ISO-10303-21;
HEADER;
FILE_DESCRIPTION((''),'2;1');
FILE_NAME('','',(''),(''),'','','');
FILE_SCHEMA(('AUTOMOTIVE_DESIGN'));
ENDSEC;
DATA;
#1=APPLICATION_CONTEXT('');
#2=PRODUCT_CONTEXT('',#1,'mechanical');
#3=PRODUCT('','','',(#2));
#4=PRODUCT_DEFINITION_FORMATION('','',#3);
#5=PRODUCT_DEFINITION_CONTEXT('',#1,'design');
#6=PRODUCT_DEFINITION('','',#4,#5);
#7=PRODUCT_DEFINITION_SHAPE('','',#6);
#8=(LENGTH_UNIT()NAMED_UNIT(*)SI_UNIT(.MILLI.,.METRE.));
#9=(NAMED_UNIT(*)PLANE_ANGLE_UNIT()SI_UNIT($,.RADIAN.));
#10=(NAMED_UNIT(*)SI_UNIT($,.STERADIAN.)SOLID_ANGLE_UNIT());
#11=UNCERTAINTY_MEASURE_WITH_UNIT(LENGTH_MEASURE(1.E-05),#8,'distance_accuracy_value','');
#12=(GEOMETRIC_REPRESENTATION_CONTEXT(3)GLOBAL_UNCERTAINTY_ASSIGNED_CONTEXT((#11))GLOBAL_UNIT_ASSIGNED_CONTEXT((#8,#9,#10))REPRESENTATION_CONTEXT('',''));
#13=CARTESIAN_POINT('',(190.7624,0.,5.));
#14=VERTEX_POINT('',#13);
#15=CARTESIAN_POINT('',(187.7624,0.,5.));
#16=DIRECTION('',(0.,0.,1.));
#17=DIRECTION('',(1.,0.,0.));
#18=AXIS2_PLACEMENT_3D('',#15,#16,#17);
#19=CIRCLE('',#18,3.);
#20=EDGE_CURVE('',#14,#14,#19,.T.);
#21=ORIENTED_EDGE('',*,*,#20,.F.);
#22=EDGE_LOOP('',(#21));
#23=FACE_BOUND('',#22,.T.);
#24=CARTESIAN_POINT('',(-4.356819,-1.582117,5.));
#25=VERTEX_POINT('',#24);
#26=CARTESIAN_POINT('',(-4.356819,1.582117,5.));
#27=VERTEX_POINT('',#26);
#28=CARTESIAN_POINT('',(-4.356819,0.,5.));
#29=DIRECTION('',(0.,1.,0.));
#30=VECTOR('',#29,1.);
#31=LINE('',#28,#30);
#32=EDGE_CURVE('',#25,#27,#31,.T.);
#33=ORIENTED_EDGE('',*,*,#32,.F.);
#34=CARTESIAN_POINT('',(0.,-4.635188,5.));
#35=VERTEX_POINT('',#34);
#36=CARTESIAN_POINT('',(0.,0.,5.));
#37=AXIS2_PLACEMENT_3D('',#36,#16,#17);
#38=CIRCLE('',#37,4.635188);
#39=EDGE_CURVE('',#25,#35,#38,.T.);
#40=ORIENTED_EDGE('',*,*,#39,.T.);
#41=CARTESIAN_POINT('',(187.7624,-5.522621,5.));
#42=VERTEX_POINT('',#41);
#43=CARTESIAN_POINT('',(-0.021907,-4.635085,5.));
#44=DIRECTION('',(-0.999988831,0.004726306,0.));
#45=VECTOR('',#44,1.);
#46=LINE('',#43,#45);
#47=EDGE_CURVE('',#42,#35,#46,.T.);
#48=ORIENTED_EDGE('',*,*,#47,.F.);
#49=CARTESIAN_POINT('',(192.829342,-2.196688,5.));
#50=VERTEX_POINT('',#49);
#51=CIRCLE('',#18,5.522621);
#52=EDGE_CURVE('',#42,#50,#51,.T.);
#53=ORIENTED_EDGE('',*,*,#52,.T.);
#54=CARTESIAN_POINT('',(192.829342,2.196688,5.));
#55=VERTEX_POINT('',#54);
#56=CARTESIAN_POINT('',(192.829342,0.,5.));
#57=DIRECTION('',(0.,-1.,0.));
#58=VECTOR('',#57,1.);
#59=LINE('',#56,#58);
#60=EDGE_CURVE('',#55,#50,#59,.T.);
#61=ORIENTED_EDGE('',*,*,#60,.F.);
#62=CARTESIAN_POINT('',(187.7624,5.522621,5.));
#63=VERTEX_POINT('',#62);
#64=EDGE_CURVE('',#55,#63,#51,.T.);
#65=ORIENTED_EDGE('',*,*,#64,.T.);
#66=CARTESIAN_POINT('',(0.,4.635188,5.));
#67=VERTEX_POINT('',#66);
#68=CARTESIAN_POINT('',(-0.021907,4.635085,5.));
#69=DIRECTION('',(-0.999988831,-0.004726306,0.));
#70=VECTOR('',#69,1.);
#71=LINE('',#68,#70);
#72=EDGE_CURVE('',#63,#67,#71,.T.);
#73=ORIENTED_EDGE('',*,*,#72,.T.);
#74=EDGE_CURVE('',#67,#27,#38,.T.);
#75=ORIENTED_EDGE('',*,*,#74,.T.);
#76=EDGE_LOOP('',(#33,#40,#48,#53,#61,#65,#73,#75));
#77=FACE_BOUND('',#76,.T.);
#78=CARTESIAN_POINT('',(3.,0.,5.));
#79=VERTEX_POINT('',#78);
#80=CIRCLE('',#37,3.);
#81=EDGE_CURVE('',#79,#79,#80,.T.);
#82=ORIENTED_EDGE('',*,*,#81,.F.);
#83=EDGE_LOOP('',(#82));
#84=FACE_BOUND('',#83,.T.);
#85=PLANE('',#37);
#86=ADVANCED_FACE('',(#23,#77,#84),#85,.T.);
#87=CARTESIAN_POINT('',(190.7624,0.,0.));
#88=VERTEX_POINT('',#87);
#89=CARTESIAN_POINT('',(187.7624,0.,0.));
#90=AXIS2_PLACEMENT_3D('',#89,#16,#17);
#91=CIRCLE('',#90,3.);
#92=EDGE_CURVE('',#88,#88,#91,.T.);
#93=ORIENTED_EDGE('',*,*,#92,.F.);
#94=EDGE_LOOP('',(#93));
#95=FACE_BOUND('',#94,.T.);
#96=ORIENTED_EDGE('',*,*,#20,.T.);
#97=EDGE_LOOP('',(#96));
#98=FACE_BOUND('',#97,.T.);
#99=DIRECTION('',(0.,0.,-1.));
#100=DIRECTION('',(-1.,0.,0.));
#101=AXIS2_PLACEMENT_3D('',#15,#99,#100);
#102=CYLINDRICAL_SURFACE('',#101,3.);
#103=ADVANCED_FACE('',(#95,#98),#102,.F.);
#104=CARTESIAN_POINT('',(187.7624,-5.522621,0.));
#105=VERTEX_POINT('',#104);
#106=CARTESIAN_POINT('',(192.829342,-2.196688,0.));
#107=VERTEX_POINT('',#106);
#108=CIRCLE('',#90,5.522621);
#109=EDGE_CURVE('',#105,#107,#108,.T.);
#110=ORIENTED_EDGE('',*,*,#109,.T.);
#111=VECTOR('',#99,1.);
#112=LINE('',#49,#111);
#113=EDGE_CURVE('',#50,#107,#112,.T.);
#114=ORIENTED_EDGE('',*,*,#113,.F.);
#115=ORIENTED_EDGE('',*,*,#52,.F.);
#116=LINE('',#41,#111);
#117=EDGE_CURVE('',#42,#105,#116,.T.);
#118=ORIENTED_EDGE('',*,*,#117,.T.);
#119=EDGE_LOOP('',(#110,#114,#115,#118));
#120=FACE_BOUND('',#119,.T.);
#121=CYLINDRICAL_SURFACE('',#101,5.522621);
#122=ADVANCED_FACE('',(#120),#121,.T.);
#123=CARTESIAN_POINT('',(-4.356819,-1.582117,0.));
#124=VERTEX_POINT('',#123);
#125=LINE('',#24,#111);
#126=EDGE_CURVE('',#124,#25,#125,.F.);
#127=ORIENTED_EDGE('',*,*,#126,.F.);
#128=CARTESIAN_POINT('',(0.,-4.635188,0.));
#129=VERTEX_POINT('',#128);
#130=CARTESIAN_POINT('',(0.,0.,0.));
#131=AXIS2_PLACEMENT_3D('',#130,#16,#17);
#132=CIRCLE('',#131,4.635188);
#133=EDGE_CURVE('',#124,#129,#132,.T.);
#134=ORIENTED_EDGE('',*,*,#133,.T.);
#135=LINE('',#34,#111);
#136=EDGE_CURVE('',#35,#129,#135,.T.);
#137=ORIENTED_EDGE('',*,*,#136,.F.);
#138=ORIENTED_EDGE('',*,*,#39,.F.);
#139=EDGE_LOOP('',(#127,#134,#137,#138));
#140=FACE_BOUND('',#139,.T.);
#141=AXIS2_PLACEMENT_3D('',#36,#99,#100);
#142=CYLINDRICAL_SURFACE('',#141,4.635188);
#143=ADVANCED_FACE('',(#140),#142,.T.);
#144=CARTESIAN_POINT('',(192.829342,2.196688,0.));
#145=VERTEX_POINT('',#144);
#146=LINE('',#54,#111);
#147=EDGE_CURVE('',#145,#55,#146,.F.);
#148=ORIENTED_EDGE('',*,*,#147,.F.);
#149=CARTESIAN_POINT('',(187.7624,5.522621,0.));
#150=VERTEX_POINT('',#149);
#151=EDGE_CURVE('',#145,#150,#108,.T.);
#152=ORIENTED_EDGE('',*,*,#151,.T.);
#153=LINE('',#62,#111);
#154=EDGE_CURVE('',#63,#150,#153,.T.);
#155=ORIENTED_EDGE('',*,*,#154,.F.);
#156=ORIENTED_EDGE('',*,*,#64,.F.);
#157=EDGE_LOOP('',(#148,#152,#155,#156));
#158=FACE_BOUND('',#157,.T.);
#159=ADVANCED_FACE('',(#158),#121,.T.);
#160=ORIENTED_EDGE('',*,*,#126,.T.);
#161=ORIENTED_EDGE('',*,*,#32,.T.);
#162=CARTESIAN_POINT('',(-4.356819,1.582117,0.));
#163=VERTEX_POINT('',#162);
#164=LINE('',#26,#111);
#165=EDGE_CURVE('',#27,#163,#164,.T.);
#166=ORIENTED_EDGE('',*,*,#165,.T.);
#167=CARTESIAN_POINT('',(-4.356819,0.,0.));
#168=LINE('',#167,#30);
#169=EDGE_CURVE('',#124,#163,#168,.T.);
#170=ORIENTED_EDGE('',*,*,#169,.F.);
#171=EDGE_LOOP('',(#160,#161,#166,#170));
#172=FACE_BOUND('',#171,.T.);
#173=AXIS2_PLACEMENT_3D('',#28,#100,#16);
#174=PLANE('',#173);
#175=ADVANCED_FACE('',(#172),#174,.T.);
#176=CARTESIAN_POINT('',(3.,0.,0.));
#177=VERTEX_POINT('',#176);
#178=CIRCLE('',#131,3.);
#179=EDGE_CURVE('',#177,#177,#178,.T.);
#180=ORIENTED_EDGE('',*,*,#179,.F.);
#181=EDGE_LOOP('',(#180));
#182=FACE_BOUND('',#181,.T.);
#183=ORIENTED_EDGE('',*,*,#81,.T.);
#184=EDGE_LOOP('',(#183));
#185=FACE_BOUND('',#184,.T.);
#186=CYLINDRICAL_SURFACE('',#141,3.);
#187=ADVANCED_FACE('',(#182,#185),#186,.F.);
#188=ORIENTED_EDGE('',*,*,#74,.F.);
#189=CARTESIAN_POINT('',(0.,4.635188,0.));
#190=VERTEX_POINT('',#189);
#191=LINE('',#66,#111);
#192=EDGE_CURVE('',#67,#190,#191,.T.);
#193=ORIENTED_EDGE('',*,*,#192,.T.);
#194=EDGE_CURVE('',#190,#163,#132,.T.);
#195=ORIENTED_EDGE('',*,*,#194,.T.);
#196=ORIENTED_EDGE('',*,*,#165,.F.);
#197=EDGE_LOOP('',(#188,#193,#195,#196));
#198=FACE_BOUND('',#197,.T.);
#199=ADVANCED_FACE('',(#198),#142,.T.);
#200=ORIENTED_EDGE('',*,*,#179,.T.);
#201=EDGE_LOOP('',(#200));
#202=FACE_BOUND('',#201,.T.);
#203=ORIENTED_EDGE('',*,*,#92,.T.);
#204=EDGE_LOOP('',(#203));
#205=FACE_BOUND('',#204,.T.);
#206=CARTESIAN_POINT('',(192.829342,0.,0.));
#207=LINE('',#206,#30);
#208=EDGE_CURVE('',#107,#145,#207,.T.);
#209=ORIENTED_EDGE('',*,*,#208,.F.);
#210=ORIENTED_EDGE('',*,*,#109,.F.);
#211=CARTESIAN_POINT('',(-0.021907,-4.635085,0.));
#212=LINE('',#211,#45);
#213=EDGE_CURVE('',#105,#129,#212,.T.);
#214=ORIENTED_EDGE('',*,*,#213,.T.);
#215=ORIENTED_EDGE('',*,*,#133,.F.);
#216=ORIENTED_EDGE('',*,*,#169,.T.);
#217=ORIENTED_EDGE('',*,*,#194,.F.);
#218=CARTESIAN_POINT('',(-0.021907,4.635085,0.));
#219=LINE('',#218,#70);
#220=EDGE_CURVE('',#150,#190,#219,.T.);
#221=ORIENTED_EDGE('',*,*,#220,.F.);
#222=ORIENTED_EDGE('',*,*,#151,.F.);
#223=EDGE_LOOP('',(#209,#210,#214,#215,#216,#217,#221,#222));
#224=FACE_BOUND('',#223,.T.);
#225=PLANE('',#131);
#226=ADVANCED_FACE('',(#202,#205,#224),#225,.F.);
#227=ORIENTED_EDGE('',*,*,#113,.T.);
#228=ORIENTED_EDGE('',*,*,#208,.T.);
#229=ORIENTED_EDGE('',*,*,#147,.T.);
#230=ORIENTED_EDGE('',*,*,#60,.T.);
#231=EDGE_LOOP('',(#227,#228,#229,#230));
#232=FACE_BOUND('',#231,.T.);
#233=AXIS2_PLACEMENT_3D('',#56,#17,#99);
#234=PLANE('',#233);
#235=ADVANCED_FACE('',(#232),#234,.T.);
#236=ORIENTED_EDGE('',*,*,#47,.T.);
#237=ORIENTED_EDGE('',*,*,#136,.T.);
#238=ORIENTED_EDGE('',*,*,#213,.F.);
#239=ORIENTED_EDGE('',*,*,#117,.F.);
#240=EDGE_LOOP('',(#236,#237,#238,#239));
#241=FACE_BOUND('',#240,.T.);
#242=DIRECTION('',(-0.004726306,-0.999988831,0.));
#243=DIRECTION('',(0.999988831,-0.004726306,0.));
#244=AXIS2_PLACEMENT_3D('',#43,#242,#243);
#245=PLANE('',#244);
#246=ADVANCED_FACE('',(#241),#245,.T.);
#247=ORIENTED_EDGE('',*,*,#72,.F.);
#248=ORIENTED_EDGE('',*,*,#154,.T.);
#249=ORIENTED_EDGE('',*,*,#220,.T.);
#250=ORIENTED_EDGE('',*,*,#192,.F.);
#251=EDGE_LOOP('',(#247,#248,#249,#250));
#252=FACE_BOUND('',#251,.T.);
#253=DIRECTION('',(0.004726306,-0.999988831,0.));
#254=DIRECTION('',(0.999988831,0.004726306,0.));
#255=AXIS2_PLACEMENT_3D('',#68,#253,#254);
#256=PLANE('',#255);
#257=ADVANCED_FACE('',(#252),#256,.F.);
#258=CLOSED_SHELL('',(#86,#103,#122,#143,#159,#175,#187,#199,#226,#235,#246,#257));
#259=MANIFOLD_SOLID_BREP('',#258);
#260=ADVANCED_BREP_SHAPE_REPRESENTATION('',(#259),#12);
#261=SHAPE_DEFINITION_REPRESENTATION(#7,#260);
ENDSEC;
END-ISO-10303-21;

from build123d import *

# Parameters (mm, degrees)
DODANIE_WYCI_GNI_CIE1_OUTLINE_R = 3.000000079
DODANIE_WYCI_GNI_CIE1_DEPTH     = 5
SZKIC2_W                        = 1.618528634
SZKIC2_H                        = 4.134107934
SZKIC2_H_2                      = 3.371537851
SZKIC2_W_2                      = 0.651830256
SZKIC2_H_3                      = 2.48709631
SZKIC2_H_4                      = 2.564588173
WYTNIJ_WYCI_GNI_CIE3_DEPTH      = 194.428536027


# Read off the part's stored shape, not the designer's step: Dodanie-wyciągnięcie1
with BuildPart() as part:
    # Dodanie-wyciągnięcie1 outline → Dodanie-wyciągnięcie1 (new body)
    with BuildSketch(Plane.XY):
        with BuildLine():
            Line((187.7624, 5.522620658), (0, 4.635188213))
            ThreePointArc((0, 4.635188213), (-4.635188213, 0), (0, -4.635188213))
            Line((0, -4.635188213), (187.7624, -5.522620658))
            ThreePointArc((187.7624, -5.522620658), (193.285020658, 0), (187.7624, 5.522620658))
        make_face()
        Circle(DODANIE_WYCI_GNI_CIE1_OUTLINE_R, mode=Mode.SUBTRACT)
        with Locations((187.7624, 0)):
            Circle(DODANIE_WYCI_GNI_CIE1_OUTLINE_R, mode=Mode.SUBTRACT)
    extrude(amount=DODANIE_WYCI_GNI_CIE1_DEPTH)

    # Szkic2 → Wytnij-wyciągnięcie3 (cut, through all)
    with BuildSketch(Plane.XY):
        with Locations((193.638606269, 2.067053967)):
            Rectangle(SZKIC2_W, SZKIC2_H)
        with Locations((193.638606269, -1.685768926)):
            Rectangle(SZKIC2_W, SZKIC2_H_2)
        with Locations((-4.682734605, 1.243548155)):
            Rectangle(SZKIC2_W_2, SZKIC2_H_3)
        with Locations((-4.682734605, -1.282294087)):
            Rectangle(SZKIC2_W_2, SZKIC2_H_4)
    extrude(amount=WYTNIJ_WYCI_GNI_CIE3_DEPTH, mode=Mode.SUBTRACT)


solid = part.part
